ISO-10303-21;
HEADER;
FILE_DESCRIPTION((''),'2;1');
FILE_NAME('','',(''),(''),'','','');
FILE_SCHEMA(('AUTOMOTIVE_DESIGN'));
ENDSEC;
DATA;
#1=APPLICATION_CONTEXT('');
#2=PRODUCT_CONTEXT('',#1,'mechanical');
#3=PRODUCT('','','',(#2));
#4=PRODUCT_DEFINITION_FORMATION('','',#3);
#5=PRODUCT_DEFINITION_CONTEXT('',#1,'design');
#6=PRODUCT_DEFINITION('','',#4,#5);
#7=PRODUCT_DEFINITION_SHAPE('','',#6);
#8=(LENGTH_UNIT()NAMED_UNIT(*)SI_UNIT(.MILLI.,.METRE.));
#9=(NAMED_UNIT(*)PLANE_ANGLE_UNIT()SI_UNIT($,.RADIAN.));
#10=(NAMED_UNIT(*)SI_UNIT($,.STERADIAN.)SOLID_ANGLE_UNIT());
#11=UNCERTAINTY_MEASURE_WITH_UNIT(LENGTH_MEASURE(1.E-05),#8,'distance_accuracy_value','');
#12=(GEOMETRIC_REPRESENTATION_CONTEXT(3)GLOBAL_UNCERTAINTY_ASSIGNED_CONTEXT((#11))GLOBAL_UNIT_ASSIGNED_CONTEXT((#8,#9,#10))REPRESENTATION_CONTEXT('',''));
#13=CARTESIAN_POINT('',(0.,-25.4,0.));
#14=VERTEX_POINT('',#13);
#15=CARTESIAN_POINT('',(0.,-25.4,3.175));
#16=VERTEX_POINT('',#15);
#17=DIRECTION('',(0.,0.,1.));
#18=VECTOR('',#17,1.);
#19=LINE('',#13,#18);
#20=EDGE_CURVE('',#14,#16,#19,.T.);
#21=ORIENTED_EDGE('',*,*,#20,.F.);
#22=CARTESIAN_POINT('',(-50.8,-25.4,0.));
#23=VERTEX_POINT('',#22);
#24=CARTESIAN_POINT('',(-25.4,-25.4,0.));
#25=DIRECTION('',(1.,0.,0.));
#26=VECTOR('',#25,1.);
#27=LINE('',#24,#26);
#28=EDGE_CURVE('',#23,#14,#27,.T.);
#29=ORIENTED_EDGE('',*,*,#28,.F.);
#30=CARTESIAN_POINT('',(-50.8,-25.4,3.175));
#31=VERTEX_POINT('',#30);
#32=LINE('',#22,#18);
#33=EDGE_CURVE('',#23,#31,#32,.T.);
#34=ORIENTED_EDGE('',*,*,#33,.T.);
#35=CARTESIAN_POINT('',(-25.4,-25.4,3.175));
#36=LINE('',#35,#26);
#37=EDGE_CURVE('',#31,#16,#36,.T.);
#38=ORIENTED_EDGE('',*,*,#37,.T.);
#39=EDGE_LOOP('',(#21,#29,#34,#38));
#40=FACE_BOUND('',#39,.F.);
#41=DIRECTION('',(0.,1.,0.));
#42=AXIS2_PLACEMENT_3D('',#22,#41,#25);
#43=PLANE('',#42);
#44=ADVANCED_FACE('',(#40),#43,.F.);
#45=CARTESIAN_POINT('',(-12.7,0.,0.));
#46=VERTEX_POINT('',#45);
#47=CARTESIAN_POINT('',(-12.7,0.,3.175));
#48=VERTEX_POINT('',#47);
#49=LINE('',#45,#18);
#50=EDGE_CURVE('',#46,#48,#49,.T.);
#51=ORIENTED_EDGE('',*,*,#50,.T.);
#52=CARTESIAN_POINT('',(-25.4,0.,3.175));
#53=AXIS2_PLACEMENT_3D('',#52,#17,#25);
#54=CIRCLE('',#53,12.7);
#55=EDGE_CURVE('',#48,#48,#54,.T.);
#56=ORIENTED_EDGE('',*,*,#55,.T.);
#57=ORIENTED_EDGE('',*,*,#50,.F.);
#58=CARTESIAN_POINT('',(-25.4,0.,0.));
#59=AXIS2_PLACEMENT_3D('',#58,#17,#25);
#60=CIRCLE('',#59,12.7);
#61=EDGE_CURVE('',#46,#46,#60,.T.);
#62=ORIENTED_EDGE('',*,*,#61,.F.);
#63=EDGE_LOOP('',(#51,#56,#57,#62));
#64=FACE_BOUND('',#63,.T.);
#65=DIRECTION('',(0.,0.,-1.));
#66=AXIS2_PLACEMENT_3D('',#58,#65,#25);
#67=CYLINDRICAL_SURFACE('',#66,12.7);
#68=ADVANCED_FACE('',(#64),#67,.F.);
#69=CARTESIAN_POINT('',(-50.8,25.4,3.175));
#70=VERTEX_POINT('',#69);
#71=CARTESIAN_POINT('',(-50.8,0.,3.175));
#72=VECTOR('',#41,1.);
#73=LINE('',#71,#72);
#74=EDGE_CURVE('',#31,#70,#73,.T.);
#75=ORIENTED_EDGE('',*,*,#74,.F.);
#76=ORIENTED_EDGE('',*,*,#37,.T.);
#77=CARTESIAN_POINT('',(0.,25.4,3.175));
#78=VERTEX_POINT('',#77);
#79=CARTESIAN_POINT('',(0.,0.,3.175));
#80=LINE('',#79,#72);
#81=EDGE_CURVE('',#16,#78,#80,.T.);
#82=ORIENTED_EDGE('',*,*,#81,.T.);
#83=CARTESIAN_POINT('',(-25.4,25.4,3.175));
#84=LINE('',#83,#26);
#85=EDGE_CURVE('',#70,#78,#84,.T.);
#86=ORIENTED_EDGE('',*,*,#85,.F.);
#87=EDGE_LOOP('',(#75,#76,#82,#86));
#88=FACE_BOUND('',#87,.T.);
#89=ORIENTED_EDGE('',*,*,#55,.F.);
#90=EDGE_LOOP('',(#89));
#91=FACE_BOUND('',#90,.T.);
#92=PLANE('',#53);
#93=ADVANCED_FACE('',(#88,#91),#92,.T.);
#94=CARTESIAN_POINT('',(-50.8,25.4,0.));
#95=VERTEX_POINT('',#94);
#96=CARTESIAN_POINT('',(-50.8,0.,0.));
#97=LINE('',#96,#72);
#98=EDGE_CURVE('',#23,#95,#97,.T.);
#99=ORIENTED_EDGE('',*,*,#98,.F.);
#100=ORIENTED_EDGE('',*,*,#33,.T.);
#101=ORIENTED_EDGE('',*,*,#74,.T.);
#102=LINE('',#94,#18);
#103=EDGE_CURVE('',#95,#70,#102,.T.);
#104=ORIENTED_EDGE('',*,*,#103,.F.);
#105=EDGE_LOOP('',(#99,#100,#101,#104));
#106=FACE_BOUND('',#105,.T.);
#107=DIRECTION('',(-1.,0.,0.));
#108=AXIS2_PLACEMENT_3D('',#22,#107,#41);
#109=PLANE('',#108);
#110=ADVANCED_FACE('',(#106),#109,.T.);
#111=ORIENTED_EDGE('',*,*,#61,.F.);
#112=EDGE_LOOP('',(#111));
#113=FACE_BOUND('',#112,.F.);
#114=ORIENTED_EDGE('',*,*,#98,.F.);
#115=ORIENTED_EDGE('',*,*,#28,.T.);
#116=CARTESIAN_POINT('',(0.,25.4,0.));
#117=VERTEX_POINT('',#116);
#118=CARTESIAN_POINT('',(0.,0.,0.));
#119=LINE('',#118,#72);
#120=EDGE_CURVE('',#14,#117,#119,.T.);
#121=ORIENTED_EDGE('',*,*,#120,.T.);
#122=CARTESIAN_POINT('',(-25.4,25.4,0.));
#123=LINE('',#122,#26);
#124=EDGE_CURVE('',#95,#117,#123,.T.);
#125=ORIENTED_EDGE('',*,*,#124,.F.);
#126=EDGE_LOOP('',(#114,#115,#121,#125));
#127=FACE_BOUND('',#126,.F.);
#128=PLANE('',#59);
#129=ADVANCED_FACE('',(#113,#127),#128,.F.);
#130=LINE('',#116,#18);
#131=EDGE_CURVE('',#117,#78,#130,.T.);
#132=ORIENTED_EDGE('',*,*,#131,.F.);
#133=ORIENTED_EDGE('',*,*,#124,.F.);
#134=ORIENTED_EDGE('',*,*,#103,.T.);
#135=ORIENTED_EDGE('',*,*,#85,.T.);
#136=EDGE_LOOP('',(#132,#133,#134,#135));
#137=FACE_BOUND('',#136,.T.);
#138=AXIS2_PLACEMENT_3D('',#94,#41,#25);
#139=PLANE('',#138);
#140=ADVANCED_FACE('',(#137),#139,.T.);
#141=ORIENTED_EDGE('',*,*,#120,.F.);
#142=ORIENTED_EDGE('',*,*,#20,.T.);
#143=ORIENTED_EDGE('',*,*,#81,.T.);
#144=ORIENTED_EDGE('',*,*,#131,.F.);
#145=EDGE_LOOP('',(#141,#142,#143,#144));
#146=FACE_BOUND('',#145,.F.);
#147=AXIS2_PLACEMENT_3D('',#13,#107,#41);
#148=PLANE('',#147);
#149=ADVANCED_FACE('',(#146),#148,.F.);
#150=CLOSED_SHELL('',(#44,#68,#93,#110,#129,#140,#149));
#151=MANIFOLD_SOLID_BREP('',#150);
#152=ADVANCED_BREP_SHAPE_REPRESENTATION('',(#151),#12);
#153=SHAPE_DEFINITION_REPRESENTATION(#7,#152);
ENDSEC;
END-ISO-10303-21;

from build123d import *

# Parameters (mm, degrees)
F0_W     = 50.8
F0_H     = 50.8
F0_R     = 12.7
F1_DEPTH = 3.175


# Not quite as in the source:
# - a length typed as a fraction of an inch, garbled in the dataset ("3 / 203.2 mm" for 3/8 in), is restored


with BuildPart() as f1:
    # F0 (on Top) → F1 (new body)
    with BuildSketch(Plane.XY):
        with Locations((-25.4, 0)):
            Rectangle(F0_W, F0_H)
        with Locations((-25.4, 0)):
            Circle(F0_R, mode=Mode.SUBTRACT)
    extrude(amount=F1_DEPTH)


solid = f1.part
